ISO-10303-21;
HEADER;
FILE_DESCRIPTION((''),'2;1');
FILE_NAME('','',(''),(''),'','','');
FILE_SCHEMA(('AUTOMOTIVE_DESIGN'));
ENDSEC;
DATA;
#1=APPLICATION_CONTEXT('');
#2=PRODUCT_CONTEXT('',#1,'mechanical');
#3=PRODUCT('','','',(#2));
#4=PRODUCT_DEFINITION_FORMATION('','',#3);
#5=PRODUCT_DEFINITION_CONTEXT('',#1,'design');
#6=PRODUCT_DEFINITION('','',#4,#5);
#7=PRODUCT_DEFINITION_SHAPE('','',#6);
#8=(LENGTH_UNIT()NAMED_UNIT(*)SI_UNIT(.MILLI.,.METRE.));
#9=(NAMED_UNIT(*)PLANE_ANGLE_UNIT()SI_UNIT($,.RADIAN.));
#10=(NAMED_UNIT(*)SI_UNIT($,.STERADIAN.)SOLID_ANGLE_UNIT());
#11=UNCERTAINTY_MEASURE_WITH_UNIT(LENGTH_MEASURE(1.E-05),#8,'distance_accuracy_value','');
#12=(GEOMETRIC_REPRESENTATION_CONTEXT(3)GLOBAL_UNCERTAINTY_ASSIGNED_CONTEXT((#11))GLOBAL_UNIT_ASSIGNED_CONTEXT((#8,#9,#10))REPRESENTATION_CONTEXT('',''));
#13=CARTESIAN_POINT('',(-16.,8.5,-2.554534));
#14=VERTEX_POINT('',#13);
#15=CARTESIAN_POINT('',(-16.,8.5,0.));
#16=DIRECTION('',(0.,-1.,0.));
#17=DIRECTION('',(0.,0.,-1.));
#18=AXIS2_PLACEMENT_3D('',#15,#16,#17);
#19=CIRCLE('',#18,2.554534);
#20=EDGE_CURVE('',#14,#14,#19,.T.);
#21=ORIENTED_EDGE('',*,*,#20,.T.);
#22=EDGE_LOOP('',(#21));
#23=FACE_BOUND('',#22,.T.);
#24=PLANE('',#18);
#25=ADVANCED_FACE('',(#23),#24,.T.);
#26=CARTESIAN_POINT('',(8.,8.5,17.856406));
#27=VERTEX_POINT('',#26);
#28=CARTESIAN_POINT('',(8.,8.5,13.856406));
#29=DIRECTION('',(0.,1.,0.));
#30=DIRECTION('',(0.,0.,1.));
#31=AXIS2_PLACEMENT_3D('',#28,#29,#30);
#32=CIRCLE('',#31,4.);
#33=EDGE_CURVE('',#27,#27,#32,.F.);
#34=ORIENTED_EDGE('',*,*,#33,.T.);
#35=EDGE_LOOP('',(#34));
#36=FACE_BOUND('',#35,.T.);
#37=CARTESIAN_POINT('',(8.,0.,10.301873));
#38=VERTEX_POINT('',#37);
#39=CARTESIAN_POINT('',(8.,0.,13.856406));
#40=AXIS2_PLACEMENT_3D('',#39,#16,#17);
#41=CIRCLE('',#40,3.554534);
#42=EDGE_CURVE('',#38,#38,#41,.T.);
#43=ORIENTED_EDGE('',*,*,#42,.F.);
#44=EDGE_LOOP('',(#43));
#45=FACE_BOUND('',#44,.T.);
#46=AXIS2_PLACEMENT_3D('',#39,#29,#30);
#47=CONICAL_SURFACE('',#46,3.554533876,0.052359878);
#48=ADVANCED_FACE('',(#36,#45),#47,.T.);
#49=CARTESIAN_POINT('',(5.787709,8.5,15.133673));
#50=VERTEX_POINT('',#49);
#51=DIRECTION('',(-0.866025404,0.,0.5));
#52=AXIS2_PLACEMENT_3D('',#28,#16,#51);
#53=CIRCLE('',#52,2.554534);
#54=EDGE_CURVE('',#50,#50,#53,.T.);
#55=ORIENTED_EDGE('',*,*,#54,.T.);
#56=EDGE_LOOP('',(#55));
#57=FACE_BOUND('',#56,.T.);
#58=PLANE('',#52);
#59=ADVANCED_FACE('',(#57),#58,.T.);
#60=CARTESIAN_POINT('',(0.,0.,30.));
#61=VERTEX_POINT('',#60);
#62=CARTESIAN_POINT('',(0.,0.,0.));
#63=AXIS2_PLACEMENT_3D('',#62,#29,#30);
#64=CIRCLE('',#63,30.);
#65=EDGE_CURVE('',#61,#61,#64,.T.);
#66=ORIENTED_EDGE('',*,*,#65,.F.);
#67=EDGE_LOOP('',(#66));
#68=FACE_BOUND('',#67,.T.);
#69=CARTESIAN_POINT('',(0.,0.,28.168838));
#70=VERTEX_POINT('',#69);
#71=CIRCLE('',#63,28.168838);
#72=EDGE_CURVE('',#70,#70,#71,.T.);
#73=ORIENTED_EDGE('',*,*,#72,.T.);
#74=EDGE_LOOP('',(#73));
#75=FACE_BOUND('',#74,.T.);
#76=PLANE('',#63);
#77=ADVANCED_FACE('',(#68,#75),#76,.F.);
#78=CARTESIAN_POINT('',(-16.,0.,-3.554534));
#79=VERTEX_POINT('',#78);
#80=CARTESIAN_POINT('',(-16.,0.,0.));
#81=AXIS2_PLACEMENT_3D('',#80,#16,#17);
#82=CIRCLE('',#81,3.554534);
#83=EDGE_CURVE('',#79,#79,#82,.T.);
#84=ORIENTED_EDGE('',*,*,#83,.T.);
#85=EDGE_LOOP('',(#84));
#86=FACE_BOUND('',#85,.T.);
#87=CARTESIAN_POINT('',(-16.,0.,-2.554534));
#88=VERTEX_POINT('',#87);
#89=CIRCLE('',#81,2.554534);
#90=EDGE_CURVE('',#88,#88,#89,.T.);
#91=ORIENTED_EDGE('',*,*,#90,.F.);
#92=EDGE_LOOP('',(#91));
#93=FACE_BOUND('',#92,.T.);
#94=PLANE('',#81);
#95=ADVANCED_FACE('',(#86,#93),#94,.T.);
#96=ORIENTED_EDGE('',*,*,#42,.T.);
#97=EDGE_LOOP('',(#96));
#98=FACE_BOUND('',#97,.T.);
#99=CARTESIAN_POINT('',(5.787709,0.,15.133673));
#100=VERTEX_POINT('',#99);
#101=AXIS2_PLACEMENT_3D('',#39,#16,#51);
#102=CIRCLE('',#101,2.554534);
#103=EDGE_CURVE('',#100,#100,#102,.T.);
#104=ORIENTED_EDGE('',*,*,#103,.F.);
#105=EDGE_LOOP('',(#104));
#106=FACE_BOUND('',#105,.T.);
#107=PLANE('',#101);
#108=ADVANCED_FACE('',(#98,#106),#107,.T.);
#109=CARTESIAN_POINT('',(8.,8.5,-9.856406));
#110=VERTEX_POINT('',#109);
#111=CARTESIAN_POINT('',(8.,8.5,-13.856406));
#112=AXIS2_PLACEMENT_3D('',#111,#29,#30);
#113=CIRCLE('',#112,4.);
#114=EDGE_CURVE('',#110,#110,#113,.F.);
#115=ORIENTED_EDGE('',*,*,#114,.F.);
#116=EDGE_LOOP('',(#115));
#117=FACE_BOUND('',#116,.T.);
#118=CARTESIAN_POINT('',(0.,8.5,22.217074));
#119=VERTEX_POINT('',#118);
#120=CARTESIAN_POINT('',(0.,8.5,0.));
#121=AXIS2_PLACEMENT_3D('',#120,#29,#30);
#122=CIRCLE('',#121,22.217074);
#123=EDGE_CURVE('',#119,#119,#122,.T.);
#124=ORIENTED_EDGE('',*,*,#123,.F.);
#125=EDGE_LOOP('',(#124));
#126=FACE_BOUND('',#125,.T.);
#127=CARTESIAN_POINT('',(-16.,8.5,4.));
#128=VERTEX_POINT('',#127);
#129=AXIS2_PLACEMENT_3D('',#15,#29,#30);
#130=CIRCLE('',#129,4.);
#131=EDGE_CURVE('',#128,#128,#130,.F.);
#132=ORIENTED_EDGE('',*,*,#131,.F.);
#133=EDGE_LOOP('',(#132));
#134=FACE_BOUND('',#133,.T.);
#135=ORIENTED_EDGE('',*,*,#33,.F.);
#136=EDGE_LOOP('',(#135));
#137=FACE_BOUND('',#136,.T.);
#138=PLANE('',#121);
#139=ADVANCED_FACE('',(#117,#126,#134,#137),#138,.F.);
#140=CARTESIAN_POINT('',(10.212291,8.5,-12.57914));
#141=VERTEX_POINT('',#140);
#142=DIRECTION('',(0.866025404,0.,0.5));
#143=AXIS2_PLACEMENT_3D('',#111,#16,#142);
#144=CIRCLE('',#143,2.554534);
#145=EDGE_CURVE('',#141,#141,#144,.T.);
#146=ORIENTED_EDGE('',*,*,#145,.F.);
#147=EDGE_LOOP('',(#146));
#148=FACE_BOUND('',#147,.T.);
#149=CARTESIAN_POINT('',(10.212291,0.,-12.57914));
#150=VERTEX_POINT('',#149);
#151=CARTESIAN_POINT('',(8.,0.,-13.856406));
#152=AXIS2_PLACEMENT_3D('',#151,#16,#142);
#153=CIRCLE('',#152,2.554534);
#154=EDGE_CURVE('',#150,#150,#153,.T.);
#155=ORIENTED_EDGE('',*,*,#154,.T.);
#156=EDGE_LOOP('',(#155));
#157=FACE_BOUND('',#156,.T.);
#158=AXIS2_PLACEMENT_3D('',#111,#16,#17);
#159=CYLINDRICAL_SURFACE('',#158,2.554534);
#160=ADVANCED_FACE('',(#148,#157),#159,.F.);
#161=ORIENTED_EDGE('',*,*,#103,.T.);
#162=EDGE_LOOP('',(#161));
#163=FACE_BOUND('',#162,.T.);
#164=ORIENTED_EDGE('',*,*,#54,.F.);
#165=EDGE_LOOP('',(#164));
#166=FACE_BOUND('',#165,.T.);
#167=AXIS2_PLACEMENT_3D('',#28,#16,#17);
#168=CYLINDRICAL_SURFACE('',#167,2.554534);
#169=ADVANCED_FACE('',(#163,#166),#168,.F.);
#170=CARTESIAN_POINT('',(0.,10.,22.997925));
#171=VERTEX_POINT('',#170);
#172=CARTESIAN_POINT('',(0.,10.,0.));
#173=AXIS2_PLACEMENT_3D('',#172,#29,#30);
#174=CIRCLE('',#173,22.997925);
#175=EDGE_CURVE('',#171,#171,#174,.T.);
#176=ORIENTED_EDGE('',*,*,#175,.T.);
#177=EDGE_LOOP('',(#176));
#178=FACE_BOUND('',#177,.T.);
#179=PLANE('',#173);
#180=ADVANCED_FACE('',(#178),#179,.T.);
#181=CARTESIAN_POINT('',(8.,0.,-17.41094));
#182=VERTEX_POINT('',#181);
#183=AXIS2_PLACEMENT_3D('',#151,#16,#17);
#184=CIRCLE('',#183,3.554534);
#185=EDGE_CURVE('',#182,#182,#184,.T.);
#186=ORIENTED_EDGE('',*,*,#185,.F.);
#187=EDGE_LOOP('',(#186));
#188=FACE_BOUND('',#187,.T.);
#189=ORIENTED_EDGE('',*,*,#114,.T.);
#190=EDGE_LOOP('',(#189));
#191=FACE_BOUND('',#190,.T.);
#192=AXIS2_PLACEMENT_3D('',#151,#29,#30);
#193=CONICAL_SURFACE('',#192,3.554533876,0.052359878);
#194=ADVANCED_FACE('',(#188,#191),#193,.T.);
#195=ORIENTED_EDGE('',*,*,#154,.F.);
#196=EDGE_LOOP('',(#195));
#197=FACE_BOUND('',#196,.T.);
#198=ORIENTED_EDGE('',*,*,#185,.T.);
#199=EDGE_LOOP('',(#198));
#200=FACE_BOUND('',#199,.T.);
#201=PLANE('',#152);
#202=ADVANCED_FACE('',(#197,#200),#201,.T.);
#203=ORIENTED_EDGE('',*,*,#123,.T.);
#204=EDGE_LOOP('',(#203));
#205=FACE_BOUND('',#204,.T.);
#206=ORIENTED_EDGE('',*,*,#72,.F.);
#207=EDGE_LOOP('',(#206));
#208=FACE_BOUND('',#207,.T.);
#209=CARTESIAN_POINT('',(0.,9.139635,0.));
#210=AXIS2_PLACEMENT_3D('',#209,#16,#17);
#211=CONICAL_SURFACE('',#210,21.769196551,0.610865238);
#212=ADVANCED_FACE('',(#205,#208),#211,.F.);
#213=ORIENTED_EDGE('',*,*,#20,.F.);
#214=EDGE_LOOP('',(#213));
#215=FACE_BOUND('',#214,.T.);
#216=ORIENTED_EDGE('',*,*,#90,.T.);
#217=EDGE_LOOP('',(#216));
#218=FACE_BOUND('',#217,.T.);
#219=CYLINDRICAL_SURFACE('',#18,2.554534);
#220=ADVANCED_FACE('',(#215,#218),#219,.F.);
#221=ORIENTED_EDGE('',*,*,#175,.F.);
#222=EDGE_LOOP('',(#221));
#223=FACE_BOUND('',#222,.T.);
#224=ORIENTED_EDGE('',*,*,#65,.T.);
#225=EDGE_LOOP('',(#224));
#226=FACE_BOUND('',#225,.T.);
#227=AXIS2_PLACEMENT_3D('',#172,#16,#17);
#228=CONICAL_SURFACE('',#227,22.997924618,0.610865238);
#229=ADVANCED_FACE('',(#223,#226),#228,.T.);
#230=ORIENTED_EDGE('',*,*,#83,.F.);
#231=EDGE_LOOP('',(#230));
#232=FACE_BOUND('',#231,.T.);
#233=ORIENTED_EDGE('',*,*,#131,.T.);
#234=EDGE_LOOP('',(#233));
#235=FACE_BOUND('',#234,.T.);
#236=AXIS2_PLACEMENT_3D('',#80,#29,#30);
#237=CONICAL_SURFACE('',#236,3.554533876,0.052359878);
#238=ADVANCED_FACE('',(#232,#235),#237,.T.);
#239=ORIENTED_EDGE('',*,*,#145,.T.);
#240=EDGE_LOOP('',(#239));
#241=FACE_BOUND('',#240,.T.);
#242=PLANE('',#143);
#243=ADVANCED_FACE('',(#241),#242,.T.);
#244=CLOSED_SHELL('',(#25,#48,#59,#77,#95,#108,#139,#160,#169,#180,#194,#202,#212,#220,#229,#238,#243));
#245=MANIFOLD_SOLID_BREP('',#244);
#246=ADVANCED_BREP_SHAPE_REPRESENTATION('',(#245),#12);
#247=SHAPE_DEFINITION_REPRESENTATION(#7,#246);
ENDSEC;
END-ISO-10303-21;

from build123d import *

# Parameters (mm, degrees)
ESQUISSE1_R                                 = 30
BOSS_EXTRU_1_DEPTH                          = 10
CHANFREIN1_SIZE                             = 10
CHANFREIN1_SIZE_2                           = 7.002075382
COQUE2_T                                    = -1.5
ESQUISSE2_R                                 = 4
BOSS_EXTRU_2_DEPTH                          = 8.5
CHANFREIN2_SIZE                             = 8.5
CHANFREIN2_SIZE_2                           = 0.445466124
ESQUISSE5_R                                 = 2.554533876
ENL_V_MAT_EXTRU_1_DEPTH                     = 8.5
R_P_TITION_CIRCULAIRE1_COUNT                = 3
CHANFREIN2_OF_R_P_TITION_CIRCULAIRE1_SIZE   = 8.5
CHANFREIN2_OF_R_P_TITION_CIRCULAIRE1_SIZE_2 = 0.445466124


with BuildPart() as part:
    # Esquisse1 → Boss.-Extru.1 (new body)
    with BuildSketch(Plane(origin=(0, 0, 0), x_dir=(1, 0, 0), z_dir=(0, 1, 0))):
        with Locations(Location((0, 0, 0), (0, 0, 270))):
            Circle(ESQUISSE1_R)
    extrude(amount=BOSS_EXTRU_1_DEPTH)

    # Chanfrein1
    # the kernel refuses this chamfer: 10, 7.002075382 mm, written as the material it takes off along each edge
    with BuildSketch(Plane(origin=(0, 10, 0), x_dir=(0, 0, 1), z_dir=(-1, 0, 0))) as chanfrein1_piece_1:
        Polygon((30, -CHANFREIN1_SIZE), (30 - CHANFREIN1_SIZE_2, 0), (30, 0), align=None)
    revolve(axis=Axis((0, 10, 0), (0, 1, 0)), mode=Mode.SUBTRACT)

    # Coque2
    coque2_openings = [part.faces().sort_by_distance(p)[0] for p in [
        (0, 0, 0),
    ]]
    offset(amount=COQUE2_T, openings=coque2_openings, kind=Kind.INTERSECTION)

    # Esquisse2 → Boss.-Extru.2 (add)
    with BuildSketch(Plane.XZ.offset(-8.5)):
        with Locations(Location((-16, 0, 0), (0, 0, 90))):
            Circle(ESQUISSE2_R)
    boss_extru_2 = extrude(amount=BOSS_EXTRU_2_DEPTH)

    # Chanfrein2
    # the kernel refuses this chamfer: 8.5, 0.445466124 mm, written as the material it takes off along each edge
    with BuildSketch(Plane(origin=(-16, 0, 0), x_dir=(0, 0, 1), z_dir=(1, 0, 0))) as chanfrein2_piece_1_section:
        Polygon((4, -CHANFREIN2_SIZE), (4 - CHANFREIN2_SIZE_2, 0), (4, 0), align=None)
    chanfrein2_piece_1 = revolve(axis=Axis((-16, 0, 0), (0, -1, 0)), mode=Mode.PRIVATE)
    chanfrein2_piece_1 = split(chanfrein2_piece_1, bisect_by=Plane(origin=(-16, 8.5, -3.812448858), z_dir=(0, -1, 0)), keep=Keep.TOP, mode=Mode.PRIVATE)
    add(chanfrein2_piece_1, mode=Mode.SUBTRACT)

    # Esquisse5 → Enlèv. mat.-Extru.1 (cut)
    with BuildSketch(Plane.XZ):
        with Locations(Location((-16, 0, 0), (0, 0, 270))):
            Circle(ESQUISSE5_R)
    enl_v_mat_extru_1 = extrude(amount=-ENL_V_MAT_EXTRU_1_DEPTH, mode=Mode.SUBTRACT)

    # Répétition circulaire1: Boss.-Extru.2, Enlèv. mat.-Extru.1 ×3 about axis
    r_p_tition_circulaire1_axis = Axis((0, 0, 0), (0, 1, 0))
    add([boss_extru_2.rotate(r_p_tition_circulaire1_axis, i * 360 / R_P_TITION_CIRCULAIRE1_COUNT) for i in range(1, R_P_TITION_CIRCULAIRE1_COUNT)])
    add([enl_v_mat_extru_1.rotate(r_p_tition_circulaire1_axis, i * 360 / R_P_TITION_CIRCULAIRE1_COUNT) for i in range(1, R_P_TITION_CIRCULAIRE1_COUNT)], mode=Mode.SUBTRACT)

    # Chanfrein2 of Répétition circulaire1
    # the kernel refuses this chamfer: 8.5, 0.445466124 mm, written as the material it takes off along each edge
    with BuildSketch(Plane(origin=(8, 0, 13.856406461), x_dir=(0.8660254037844387, 0, -0.5000000000000001), z_dir=(-0.5000000000000001, 0, -0.8660254037844387))) as chanfrein2_of_r_p_tition_circulaire1_piece_1_section:
        Polygon((4, -CHANFREIN2_OF_R_P_TITION_CIRCULAIRE1_SIZE), (4 - CHANFREIN2_OF_R_P_TITION_CIRCULAIRE1_SIZE_2, 0), (4, 0), align=None)
    chanfrein2_of_r_p_tition_circulaire1_piece_1 = revolve(axis=Axis((8, 0, 13.856406461), (0, -1, 0)), mode=Mode.PRIVATE)
    chanfrein2_of_r_p_tition_circulaire1_piece_1 = split(chanfrein2_of_r_p_tition_circulaire1_piece_1, bisect_by=Plane(origin=(4.698322438, 8.5, 15.762630889), z_dir=(0, -1, 0)), keep=Keep.TOP, mode=Mode.PRIVATE)
    add(chanfrein2_of_r_p_tition_circulaire1_piece_1, mode=Mode.SUBTRACT)
    with BuildSketch(Plane(origin=(8, 0, -13.856406461), x_dir=(-0.8660254037844384, 0, -0.5000000000000003), z_dir=(-0.5000000000000003, 0, 0.8660254037844384))) as chanfrein2_of_r_p_tition_circulaire1_piece_2_section:
        Polygon((4, -CHANFREIN2_OF_R_P_TITION_CIRCULAIRE1_SIZE), (4 - CHANFREIN2_OF_R_P_TITION_CIRCULAIRE1_SIZE_2, 0), (4, 0), align=None)
    chanfrein2_of_r_p_tition_circulaire1_piece_2 = revolve(axis=Axis((8, 0, -13.856406461), (0, -1, 0)), mode=Mode.PRIVATE)
    chanfrein2_of_r_p_tition_circulaire1_piece_2 = split(chanfrein2_of_r_p_tition_circulaire1_piece_2, bisect_by=Plane(origin=(11.301677562, 8.5, -11.950182032), z_dir=(0, -1, 0)), keep=Keep.TOP, mode=Mode.PRIVATE)
    add(chanfrein2_of_r_p_tition_circulaire1_piece_2, mode=Mode.SUBTRACT)


solid = part.part
